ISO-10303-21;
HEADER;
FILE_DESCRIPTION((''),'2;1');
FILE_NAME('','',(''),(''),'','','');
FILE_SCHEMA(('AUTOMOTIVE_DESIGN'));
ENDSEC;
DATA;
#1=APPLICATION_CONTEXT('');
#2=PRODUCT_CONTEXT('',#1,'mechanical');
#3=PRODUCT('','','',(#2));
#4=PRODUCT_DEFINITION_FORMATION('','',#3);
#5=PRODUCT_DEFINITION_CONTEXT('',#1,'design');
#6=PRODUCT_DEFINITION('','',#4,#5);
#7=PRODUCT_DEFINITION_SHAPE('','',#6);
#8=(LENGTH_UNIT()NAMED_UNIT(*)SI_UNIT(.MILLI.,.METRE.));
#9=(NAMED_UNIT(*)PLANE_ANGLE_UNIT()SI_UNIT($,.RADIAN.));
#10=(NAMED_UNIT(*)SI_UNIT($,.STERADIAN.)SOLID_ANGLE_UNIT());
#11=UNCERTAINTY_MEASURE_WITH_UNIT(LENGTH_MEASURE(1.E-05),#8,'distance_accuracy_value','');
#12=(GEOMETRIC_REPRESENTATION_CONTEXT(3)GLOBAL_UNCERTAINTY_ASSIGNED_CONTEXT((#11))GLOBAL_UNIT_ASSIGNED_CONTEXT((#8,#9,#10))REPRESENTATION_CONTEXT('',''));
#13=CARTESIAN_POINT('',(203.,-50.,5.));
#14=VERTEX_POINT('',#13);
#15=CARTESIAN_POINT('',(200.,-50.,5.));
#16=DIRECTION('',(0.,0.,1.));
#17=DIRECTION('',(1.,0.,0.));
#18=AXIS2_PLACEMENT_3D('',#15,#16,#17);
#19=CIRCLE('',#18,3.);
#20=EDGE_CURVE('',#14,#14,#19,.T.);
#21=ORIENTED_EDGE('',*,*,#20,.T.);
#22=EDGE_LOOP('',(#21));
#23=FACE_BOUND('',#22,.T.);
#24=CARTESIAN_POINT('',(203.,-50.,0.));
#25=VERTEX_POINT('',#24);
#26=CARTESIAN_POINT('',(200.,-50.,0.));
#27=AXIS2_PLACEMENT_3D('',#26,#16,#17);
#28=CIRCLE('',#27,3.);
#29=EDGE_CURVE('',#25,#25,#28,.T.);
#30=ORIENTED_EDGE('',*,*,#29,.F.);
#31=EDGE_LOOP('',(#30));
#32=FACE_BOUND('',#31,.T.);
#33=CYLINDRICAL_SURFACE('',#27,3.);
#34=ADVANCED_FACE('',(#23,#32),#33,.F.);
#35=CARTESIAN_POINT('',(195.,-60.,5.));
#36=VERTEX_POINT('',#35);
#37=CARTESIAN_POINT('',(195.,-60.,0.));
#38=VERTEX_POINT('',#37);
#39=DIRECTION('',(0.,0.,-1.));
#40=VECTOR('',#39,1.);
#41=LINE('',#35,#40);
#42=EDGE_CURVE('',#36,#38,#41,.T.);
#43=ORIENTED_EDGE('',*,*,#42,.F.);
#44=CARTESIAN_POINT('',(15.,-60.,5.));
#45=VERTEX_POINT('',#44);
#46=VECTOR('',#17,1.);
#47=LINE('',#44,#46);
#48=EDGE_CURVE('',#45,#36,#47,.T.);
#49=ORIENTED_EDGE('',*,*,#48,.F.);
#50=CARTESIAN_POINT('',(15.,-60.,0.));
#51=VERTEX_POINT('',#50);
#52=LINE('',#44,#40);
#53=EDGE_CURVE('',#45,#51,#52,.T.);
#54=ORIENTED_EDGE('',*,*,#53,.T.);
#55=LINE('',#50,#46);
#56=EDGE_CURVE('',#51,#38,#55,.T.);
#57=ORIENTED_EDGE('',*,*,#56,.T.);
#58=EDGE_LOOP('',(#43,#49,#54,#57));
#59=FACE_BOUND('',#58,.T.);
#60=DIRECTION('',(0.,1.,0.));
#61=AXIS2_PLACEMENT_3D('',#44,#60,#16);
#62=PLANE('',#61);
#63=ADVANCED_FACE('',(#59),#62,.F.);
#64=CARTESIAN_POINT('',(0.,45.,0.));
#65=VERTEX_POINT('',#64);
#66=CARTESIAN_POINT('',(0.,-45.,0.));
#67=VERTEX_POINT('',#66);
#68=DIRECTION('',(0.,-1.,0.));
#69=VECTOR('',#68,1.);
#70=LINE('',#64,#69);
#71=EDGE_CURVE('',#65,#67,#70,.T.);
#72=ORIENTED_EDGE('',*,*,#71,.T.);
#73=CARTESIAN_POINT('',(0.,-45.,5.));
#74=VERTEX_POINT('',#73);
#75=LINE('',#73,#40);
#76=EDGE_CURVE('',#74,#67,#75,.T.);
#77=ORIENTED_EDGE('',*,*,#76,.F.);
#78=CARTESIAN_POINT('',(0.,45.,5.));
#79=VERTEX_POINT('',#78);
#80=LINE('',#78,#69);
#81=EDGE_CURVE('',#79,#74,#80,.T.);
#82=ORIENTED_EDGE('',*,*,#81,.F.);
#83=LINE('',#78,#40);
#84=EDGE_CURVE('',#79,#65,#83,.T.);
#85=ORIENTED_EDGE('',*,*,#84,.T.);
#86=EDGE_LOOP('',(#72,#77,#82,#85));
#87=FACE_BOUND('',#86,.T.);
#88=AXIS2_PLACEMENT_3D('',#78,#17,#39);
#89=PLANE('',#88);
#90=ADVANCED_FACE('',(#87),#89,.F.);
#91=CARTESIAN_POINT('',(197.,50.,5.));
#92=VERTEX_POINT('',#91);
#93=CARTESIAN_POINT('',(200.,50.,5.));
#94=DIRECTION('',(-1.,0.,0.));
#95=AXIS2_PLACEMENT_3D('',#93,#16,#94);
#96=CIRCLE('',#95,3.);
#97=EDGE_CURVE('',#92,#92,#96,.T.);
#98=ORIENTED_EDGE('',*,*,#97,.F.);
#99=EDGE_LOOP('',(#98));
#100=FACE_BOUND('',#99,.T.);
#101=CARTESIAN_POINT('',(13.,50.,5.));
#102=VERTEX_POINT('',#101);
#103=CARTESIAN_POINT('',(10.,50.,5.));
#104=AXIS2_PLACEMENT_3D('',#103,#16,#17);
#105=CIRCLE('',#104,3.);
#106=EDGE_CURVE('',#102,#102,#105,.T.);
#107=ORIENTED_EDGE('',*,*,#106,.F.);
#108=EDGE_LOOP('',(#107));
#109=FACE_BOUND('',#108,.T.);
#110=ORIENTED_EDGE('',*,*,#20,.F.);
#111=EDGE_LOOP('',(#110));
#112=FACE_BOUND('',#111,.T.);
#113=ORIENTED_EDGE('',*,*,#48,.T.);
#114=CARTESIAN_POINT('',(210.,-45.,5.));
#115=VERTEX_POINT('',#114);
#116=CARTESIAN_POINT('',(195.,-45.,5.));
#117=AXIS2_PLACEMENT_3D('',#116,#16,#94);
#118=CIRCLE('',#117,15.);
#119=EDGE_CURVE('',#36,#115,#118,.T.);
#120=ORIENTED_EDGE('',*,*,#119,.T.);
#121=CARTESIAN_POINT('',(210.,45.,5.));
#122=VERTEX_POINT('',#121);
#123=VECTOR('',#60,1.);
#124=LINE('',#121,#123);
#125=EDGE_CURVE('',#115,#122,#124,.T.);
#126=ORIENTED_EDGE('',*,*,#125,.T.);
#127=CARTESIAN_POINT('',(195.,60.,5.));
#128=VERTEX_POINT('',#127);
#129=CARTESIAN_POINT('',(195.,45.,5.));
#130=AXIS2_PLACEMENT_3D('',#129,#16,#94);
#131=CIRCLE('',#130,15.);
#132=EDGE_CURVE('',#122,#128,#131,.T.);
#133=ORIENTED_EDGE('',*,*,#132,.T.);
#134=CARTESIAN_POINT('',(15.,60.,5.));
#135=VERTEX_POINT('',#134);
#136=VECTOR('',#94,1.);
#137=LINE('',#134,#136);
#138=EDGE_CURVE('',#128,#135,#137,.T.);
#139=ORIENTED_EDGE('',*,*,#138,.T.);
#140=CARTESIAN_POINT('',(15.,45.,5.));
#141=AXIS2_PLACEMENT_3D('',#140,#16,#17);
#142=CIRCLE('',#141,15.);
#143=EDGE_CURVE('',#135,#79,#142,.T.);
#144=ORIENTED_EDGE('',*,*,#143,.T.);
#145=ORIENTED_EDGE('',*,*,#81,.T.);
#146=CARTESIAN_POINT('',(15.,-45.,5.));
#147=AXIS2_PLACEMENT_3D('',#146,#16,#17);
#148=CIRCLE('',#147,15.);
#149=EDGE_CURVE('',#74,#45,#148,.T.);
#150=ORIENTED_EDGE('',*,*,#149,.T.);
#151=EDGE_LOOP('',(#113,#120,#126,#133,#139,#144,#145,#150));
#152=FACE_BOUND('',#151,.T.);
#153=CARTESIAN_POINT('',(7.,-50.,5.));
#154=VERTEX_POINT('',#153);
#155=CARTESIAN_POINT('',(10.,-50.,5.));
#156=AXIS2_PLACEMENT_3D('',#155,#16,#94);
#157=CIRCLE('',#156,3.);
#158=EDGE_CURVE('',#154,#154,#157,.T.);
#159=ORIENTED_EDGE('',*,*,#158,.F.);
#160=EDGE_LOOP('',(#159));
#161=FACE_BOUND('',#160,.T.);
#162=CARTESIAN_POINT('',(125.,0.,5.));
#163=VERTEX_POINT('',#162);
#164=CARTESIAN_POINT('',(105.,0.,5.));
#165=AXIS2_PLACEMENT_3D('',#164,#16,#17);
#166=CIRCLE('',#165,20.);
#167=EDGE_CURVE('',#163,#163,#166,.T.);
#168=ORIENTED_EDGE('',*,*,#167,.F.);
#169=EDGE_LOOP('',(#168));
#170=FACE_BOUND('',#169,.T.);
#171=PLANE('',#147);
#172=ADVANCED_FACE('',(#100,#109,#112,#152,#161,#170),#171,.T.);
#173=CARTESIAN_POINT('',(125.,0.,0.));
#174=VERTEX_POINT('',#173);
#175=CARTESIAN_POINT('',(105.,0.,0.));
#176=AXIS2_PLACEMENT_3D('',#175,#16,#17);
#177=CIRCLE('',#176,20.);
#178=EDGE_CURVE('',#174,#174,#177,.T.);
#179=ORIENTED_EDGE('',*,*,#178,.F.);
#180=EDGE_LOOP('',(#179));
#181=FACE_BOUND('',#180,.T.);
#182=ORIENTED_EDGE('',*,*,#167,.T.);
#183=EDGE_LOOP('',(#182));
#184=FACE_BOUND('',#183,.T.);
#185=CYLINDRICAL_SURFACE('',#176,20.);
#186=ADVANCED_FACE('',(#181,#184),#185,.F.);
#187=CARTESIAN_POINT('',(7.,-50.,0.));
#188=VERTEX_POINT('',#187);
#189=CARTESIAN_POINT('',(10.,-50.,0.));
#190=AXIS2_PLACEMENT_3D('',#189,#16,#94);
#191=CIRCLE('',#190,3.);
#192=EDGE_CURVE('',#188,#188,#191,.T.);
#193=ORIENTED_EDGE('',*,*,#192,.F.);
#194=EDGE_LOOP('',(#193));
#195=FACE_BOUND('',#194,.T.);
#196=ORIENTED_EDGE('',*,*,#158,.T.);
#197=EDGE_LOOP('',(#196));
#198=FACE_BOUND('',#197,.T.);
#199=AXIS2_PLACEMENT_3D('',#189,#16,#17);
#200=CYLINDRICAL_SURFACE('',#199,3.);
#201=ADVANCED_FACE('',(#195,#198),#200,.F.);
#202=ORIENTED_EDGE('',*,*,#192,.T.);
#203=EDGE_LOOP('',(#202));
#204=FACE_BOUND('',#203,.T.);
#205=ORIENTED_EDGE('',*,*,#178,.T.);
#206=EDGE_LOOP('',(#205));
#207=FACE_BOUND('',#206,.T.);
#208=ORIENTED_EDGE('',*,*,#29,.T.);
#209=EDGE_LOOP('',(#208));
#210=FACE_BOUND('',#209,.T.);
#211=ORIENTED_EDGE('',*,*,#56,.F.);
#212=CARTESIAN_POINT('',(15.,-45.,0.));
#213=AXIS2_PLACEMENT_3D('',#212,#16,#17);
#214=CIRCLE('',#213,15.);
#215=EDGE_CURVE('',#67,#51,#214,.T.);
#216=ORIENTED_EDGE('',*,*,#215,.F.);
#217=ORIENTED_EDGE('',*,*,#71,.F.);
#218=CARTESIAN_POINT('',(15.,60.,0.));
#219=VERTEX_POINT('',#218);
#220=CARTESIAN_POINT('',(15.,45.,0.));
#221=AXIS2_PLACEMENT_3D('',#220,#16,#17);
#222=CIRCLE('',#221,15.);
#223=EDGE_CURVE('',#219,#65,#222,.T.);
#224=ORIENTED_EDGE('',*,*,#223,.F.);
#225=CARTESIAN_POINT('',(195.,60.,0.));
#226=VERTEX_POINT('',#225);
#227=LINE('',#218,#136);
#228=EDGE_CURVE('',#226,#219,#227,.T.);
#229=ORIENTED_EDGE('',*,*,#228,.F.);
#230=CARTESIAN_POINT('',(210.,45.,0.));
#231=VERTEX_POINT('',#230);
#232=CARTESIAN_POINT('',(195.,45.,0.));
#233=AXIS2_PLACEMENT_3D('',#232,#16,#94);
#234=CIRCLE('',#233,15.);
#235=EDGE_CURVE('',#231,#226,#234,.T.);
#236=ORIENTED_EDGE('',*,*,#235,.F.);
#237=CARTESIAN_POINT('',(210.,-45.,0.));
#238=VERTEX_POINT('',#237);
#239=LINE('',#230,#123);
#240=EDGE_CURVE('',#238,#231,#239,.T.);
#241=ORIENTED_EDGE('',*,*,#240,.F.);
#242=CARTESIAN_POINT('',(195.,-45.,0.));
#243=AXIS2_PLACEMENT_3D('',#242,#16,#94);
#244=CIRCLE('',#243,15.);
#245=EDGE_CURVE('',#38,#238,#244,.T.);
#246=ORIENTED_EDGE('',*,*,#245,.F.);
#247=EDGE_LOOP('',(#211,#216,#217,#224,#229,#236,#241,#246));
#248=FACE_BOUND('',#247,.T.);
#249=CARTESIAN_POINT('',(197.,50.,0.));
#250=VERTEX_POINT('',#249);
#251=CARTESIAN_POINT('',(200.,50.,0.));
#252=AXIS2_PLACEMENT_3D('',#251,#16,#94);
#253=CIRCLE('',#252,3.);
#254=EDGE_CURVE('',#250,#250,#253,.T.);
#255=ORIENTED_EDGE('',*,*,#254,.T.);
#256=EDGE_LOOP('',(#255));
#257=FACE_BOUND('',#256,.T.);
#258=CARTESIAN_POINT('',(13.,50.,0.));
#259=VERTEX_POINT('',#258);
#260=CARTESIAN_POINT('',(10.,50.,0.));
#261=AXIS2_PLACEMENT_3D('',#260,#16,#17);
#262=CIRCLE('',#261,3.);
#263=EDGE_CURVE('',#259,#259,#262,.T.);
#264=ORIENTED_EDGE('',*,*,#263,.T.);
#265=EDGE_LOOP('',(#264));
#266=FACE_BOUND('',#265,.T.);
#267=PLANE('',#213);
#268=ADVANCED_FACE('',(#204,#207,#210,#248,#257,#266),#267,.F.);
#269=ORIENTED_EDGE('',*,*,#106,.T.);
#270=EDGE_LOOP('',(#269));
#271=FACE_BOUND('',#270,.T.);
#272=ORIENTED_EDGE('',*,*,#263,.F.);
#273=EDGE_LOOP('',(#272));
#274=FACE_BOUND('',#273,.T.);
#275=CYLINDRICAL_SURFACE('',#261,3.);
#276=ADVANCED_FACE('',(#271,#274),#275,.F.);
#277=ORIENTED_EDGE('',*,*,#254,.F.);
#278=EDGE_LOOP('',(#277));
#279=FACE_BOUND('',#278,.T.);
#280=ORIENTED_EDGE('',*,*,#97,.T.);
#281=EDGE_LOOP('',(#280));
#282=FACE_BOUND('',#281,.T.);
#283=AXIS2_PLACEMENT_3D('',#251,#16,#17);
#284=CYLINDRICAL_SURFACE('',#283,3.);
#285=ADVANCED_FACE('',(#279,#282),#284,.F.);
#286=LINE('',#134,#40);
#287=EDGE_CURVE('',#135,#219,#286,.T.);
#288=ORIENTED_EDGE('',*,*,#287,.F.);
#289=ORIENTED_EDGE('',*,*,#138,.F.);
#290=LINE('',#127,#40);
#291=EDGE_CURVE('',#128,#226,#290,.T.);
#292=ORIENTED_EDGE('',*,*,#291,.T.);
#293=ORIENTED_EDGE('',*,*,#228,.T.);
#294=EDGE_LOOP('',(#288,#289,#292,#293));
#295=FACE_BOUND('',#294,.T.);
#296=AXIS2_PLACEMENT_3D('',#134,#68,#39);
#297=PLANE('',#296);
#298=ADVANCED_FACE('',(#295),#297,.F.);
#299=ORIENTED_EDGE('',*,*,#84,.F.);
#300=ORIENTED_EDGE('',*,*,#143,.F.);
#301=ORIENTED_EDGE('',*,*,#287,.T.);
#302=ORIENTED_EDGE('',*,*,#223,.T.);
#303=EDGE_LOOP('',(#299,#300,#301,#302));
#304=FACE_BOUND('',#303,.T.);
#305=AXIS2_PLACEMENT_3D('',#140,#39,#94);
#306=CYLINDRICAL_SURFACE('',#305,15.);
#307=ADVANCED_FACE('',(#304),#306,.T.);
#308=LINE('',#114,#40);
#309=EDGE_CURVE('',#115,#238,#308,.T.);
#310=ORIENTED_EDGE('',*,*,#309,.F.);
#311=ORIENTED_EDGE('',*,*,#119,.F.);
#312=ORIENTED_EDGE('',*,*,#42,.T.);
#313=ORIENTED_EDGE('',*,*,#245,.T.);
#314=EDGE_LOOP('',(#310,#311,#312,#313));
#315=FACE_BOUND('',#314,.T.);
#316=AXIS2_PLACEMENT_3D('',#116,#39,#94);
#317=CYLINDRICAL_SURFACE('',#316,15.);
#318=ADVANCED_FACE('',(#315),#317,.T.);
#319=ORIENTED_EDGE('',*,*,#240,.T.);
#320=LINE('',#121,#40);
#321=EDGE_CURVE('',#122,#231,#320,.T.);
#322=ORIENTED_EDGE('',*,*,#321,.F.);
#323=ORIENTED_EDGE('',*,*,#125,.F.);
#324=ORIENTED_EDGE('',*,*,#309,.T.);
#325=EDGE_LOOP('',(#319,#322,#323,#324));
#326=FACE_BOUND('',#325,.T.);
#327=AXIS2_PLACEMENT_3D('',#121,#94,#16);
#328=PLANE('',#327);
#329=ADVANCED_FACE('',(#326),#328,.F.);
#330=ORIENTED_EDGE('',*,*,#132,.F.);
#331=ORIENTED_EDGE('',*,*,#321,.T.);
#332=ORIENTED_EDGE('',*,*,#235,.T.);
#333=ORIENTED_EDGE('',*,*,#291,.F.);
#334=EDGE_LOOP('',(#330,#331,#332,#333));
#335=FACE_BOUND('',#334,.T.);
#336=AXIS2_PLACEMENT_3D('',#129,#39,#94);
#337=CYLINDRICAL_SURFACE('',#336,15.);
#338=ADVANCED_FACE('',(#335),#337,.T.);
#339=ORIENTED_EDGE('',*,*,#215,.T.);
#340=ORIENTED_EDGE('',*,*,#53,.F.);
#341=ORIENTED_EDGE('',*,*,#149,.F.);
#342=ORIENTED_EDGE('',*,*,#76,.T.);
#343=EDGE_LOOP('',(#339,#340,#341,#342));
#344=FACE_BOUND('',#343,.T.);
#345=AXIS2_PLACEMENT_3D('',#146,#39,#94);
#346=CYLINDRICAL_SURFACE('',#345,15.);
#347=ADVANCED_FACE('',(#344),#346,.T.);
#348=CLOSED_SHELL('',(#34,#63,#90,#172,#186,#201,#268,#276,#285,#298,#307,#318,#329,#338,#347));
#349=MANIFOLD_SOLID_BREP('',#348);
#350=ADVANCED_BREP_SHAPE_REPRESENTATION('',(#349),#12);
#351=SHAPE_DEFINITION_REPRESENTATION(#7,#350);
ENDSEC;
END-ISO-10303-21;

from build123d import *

# Parameters (mm, degrees)
EXTRUDE_1_DEPTH     = 5
SKETCH_2_R          = 20
CUT_EXTRUDE_1_DEPTH = 219.46052275
OTHER_1_OUTLINE_R   = 3
OTHER_1_DEPTH       = 5


# Read off the part's stored shape, not the designer's step: 孔1
with BuildPart() as part:
    # 草图1 → 凸台-拉伸1 (new body)
    with BuildSketch(Plane.XY):
        with BuildLine():
            Line((15, 60), (195, 60))
            ThreePointArc((195, 60), (205.606601718, 55.606601718), (210, 45))
            Line((210, 45), (210, -45))
            ThreePointArc((210, -45), (205.606601718, -55.606601718), (195, -60))
            Line((195, -60), (15, -60))
            ThreePointArc((15, -60), (4.393398282, -55.606601718), (0, -45))
            Line((0, -45), (0, 45))
            ThreePointArc((0, 45), (4.393398282, 55.606601718), (15, 60))
        make_face()
    extrude(amount=EXTRUDE_1_DEPTH)

    # 草图2 → 切除-拉伸1 (cut, through all)
    with BuildSketch(Plane.XY.offset(5)):
        with Locations((105, 0)):
            Circle(SKETCH_2_R)
    extrude(amount=-CUT_EXTRUDE_1_DEPTH, mode=Mode.SUBTRACT)

    # 孔1 outline → 孔1 (cut)
    with BuildSketch(Plane.XY):
        with Locations((10, 50)):
            Circle(OTHER_1_OUTLINE_R)
        with Locations((10, -50)):
            Circle(OTHER_1_OUTLINE_R)
        with Locations((200, -50)):
            Circle(OTHER_1_OUTLINE_R)
        with Locations((200, 50)):
            Circle(OTHER_1_OUTLINE_R)
    extrude(amount=OTHER_1_DEPTH, mode=Mode.SUBTRACT)


solid = part.part
